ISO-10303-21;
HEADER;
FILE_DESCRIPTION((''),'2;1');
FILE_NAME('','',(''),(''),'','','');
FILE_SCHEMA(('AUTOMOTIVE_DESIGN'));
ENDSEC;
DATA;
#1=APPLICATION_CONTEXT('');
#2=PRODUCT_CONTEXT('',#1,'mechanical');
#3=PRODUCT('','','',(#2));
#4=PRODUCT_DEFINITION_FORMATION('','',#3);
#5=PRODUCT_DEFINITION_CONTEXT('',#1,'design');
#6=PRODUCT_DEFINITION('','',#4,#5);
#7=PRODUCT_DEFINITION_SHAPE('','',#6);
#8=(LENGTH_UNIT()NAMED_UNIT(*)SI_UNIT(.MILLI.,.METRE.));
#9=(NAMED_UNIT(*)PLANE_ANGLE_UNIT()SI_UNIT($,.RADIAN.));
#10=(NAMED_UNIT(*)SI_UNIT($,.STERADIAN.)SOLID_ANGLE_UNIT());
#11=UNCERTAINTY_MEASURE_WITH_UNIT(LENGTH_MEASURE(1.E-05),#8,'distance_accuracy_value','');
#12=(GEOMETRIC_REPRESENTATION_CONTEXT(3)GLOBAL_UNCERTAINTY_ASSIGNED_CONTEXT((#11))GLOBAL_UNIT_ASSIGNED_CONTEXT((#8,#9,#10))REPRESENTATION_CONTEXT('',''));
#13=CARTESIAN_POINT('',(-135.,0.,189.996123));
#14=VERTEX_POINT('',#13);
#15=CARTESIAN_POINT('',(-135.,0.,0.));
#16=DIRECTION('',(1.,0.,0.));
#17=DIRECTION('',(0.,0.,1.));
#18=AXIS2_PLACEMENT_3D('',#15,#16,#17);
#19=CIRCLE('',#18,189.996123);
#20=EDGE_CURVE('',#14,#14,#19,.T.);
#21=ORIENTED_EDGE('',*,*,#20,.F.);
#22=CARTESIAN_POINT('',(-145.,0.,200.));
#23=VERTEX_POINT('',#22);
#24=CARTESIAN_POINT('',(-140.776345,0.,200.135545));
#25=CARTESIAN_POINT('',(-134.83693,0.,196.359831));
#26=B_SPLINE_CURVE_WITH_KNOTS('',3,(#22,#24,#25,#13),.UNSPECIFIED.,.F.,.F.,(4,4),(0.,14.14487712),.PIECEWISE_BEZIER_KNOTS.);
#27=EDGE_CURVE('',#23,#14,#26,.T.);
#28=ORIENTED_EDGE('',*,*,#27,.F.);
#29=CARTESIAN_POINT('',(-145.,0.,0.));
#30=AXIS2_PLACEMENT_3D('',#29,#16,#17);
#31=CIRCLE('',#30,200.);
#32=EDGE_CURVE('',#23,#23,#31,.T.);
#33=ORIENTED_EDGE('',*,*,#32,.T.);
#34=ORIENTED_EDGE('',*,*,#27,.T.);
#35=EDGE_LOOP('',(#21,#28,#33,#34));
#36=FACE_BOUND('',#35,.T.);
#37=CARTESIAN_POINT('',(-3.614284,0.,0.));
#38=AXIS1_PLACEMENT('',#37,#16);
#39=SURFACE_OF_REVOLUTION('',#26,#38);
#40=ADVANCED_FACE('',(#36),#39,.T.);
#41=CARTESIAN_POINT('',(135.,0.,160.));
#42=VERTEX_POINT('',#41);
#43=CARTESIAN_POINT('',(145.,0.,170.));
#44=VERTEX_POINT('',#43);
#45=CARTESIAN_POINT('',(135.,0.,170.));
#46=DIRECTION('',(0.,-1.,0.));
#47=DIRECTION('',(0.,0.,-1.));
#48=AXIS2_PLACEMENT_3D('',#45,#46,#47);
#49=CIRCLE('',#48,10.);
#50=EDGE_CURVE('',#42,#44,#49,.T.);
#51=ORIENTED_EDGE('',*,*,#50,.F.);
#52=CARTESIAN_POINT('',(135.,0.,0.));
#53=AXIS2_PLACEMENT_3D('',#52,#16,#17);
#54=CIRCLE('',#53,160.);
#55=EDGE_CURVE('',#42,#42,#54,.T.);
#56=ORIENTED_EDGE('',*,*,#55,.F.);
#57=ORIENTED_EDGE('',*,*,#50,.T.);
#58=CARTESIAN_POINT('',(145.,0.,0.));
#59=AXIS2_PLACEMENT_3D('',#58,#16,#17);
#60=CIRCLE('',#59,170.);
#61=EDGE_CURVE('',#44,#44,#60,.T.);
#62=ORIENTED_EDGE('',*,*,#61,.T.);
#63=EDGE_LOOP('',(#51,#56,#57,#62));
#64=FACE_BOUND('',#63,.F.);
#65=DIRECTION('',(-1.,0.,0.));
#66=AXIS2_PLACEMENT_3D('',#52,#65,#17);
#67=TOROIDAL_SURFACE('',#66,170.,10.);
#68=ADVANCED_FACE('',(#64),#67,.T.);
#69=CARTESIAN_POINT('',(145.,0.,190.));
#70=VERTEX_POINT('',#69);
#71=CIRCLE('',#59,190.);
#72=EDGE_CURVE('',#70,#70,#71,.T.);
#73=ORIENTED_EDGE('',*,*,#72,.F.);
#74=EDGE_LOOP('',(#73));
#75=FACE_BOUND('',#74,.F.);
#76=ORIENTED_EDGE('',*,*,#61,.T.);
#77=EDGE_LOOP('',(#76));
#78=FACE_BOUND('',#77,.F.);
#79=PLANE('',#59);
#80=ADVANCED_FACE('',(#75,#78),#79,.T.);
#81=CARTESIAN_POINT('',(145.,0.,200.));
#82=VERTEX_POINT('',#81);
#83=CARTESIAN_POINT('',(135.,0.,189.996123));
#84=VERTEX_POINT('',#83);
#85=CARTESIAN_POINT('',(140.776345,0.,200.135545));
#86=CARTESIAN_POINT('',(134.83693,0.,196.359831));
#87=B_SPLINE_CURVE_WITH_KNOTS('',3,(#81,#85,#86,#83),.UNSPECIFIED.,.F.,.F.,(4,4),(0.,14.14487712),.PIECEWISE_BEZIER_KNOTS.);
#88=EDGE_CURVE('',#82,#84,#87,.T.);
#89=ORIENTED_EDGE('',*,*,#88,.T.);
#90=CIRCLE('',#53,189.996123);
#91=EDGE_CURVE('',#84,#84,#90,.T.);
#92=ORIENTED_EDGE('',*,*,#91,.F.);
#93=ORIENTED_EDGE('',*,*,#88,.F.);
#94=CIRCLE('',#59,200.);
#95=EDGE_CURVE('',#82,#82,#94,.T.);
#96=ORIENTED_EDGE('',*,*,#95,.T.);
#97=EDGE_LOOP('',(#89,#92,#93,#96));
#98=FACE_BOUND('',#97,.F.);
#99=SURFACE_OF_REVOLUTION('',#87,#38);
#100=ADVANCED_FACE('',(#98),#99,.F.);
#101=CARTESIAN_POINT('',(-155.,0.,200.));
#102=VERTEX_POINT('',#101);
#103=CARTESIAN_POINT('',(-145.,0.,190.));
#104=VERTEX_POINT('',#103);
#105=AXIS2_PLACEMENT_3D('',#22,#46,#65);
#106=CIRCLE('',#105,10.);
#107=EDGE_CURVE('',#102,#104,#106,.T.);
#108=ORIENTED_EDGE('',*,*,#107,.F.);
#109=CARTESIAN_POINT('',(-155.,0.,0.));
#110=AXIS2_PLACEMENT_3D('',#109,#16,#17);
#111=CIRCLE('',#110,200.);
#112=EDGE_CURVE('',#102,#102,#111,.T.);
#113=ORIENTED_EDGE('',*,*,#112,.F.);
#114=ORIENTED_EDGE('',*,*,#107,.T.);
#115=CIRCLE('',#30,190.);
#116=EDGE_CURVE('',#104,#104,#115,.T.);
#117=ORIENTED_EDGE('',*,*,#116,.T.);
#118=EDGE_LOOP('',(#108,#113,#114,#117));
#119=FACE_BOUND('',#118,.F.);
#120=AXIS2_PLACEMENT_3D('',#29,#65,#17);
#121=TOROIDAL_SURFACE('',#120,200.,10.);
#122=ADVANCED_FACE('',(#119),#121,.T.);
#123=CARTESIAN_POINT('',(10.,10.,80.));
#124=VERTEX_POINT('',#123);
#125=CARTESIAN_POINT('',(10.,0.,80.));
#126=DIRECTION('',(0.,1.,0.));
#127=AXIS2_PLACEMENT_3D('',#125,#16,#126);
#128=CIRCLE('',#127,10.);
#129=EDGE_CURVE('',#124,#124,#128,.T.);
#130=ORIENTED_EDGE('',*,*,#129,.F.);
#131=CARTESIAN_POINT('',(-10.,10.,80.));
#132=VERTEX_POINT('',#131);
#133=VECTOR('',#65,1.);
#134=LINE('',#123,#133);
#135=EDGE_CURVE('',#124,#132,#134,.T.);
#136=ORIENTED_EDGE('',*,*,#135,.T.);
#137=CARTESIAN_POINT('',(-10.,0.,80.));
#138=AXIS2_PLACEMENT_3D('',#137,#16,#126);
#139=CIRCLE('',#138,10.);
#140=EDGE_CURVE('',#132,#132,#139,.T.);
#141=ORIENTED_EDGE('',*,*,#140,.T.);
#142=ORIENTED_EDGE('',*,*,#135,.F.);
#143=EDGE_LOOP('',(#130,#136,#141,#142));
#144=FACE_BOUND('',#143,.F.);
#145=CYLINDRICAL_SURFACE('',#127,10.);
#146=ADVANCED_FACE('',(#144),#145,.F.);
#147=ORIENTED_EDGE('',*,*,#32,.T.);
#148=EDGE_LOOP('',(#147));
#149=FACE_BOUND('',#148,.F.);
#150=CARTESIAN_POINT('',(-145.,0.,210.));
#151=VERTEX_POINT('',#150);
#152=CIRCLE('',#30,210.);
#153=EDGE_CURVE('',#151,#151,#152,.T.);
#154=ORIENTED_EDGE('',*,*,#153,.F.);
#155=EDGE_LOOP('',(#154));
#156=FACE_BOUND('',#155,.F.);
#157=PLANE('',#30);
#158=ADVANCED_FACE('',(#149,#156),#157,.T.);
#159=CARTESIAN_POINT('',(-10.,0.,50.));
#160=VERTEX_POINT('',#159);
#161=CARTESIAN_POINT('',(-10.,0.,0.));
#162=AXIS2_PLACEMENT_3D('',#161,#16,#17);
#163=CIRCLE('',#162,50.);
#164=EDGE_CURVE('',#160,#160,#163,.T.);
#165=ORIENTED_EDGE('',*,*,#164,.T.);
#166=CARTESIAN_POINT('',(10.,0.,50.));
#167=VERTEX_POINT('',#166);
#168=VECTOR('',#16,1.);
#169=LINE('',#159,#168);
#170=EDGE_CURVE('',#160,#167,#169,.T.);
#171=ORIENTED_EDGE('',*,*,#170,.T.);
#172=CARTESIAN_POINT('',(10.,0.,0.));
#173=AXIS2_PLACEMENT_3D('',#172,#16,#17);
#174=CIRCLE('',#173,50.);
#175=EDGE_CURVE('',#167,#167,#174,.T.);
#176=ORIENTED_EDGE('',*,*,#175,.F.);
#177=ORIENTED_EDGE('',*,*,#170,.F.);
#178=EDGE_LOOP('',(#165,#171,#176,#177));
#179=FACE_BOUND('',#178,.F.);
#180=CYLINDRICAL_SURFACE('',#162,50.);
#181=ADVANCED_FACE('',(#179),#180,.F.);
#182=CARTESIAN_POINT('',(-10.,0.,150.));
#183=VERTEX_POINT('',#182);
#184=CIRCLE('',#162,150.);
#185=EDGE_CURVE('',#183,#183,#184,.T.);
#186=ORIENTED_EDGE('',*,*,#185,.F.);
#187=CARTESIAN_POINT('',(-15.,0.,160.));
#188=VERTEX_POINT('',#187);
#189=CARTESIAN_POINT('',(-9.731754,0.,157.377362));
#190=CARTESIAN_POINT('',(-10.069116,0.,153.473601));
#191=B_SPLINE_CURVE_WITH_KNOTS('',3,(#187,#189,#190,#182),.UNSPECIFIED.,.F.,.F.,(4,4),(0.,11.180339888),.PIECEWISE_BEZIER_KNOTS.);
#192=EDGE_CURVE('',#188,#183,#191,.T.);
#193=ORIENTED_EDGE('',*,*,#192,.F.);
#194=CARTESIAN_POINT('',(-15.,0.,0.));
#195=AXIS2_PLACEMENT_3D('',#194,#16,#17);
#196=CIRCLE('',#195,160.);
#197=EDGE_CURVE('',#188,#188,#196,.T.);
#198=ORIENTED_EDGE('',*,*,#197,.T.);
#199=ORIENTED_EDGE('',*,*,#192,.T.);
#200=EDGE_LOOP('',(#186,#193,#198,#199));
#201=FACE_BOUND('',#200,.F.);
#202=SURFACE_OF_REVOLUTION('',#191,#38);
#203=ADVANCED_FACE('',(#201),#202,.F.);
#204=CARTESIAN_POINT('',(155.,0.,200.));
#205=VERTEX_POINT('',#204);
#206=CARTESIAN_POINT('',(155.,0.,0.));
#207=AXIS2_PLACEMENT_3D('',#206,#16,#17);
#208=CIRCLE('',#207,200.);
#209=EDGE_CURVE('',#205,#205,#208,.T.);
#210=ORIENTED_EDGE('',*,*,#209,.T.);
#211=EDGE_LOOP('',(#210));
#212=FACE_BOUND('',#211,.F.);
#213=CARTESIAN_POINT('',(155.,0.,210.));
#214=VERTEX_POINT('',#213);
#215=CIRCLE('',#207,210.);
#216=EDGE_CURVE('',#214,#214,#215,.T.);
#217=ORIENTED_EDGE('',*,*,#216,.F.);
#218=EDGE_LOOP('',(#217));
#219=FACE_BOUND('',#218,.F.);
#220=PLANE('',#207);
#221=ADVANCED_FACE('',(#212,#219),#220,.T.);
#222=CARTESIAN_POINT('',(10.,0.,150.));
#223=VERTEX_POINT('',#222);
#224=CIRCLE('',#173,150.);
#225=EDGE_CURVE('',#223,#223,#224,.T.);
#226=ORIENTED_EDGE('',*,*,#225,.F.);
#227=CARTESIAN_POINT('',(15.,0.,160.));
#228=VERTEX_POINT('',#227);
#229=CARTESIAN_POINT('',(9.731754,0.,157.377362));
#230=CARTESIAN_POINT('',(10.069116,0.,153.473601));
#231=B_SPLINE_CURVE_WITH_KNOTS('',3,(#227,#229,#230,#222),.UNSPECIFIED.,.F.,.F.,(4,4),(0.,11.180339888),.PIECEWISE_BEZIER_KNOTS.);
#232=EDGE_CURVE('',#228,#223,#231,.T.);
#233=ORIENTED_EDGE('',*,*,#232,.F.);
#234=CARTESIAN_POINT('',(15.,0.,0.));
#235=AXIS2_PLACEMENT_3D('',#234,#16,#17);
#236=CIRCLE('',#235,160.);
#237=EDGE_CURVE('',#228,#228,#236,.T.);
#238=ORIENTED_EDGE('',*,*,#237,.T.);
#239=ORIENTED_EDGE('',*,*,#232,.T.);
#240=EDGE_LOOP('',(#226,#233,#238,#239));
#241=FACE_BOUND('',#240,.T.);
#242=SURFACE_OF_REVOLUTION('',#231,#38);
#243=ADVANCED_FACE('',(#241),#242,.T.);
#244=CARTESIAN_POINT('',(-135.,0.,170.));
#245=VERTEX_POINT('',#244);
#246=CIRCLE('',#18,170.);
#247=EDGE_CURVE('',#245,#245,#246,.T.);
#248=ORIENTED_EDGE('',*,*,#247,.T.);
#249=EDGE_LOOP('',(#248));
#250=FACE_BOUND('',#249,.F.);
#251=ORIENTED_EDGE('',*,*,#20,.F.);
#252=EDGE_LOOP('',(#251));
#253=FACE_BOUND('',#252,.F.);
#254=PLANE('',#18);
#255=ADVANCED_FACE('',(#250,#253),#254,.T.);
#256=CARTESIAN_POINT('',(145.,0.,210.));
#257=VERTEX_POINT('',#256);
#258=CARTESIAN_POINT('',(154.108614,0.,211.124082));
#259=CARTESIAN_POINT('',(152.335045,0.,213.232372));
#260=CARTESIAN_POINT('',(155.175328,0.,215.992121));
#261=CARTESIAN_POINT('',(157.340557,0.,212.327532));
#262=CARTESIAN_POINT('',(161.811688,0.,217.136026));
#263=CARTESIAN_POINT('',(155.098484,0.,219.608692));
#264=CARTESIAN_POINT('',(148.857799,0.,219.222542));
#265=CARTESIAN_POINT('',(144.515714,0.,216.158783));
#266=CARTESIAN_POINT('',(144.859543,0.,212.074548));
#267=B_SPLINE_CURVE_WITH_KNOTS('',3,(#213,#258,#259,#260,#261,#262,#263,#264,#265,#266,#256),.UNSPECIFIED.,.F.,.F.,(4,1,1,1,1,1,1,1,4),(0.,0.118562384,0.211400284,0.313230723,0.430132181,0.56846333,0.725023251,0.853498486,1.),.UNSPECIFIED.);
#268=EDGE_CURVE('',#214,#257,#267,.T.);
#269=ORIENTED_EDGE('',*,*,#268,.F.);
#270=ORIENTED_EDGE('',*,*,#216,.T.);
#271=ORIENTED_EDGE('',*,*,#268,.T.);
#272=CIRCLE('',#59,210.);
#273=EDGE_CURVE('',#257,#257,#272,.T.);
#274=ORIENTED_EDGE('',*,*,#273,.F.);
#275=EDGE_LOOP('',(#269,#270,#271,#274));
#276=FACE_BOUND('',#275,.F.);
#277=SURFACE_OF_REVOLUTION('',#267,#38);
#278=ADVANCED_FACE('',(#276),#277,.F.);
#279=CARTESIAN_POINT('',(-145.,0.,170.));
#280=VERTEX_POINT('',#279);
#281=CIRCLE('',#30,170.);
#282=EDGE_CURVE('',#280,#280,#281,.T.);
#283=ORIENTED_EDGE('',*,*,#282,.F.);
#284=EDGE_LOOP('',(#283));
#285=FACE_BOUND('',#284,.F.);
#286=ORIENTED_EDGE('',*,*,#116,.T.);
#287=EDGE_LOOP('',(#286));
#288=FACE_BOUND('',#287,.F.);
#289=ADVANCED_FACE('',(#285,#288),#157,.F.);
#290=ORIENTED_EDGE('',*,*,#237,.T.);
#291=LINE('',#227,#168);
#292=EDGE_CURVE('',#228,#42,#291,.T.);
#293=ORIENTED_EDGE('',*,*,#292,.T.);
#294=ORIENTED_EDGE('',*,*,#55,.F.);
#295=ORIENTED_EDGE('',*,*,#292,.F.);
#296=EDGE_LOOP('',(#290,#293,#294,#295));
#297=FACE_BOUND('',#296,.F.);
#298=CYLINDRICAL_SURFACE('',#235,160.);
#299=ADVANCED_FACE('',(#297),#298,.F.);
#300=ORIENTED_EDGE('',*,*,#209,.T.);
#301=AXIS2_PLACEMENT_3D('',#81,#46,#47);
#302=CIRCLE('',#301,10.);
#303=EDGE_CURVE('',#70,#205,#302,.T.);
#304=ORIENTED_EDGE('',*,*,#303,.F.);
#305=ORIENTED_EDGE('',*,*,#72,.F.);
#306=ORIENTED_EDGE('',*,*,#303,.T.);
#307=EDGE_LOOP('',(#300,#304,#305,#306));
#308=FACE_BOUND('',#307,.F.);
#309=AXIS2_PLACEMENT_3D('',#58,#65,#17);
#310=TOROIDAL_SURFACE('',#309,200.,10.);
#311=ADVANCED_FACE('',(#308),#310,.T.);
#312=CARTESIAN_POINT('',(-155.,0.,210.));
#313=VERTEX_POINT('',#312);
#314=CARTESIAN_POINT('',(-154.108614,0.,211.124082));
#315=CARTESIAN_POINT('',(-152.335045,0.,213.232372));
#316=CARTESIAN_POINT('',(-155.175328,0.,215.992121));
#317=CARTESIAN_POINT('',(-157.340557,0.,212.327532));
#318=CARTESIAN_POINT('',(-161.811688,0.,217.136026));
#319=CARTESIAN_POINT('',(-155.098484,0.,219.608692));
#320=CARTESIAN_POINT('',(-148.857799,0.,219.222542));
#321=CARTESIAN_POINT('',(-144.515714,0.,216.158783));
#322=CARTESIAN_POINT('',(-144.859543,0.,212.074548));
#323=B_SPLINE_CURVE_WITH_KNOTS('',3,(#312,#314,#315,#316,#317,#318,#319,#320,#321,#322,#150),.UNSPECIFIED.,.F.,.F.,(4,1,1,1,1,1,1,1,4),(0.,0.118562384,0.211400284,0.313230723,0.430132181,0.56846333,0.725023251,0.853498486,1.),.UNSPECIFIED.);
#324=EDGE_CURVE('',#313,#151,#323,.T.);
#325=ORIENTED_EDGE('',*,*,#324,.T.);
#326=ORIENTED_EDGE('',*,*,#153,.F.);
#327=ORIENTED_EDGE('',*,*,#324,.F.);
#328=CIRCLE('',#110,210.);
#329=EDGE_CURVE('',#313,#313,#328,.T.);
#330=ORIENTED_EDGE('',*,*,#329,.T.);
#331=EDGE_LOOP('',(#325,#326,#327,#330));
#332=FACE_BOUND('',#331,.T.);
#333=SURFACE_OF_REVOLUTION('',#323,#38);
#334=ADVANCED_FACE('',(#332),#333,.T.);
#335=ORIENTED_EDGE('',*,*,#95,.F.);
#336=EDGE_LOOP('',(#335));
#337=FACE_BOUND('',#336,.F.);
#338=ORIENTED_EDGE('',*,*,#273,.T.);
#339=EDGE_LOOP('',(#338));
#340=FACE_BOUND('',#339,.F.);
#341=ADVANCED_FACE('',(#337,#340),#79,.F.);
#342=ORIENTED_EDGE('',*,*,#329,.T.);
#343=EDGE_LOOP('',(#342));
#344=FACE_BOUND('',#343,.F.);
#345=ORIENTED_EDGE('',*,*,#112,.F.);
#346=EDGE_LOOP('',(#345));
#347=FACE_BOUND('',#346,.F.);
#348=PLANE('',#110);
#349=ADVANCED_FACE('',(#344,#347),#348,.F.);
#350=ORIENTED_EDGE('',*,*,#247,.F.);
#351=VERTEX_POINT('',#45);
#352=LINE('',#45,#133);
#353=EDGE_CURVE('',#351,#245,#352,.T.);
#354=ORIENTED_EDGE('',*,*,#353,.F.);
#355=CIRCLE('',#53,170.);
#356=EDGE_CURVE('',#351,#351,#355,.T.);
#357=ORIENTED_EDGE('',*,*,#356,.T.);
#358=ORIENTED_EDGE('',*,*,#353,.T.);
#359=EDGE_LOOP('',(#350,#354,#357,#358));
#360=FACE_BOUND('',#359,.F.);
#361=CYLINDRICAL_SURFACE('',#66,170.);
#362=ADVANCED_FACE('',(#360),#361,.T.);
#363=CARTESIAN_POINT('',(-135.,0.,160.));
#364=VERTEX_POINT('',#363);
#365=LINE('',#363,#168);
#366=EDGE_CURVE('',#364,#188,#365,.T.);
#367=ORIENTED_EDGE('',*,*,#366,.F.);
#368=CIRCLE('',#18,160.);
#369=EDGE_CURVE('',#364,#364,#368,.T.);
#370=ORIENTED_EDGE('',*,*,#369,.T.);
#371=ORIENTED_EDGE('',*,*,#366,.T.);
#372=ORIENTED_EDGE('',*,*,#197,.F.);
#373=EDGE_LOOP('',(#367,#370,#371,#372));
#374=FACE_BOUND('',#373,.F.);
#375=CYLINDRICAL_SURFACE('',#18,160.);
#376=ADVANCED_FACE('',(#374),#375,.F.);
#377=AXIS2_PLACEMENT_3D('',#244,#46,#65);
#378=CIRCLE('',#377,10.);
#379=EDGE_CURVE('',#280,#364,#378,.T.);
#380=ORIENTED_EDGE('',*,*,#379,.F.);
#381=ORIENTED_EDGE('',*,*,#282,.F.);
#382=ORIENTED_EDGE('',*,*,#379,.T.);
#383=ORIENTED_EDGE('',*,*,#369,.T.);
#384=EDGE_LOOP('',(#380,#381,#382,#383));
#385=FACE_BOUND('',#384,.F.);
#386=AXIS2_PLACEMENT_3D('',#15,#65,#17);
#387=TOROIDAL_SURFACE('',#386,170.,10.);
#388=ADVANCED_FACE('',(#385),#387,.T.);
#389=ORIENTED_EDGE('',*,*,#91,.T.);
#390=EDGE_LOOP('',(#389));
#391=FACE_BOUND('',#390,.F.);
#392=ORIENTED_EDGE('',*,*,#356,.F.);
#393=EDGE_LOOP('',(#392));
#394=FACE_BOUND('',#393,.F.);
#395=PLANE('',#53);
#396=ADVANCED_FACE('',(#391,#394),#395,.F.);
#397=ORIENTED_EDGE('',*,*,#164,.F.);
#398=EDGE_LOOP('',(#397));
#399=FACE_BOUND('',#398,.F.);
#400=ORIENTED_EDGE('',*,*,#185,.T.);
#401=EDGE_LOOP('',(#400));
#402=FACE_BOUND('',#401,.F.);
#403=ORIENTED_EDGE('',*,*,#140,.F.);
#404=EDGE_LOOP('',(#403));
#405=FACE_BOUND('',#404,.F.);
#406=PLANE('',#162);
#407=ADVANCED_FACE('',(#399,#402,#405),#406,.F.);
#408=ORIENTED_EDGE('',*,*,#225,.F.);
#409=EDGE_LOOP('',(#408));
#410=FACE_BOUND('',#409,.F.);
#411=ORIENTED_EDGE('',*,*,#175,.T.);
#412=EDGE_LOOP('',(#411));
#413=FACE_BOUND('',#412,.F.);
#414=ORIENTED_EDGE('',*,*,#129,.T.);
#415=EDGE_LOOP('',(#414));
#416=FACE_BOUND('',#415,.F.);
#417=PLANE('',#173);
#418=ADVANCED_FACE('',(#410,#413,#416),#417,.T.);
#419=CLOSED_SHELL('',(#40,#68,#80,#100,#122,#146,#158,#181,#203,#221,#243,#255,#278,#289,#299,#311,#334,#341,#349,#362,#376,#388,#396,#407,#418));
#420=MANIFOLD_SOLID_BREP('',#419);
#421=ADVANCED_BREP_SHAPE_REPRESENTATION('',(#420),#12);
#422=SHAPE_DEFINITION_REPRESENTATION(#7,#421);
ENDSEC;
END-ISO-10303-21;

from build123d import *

# Parameters (mm, degrees)
F2_R     = 10
F3_DEPTH = 20
F4_COUNT = 6
F4_ANGLE = 1800


with BuildPart() as f1:
    # F0 (on Front) → F1 (revolve)
    with BuildSketch(Plane.XZ):
        with BuildLine():
            Line((-135, 160), (-15, 160))
            add(Edge.make_bspline(
                [(-15, 160), (-9.7317537293, 157.3773622513), (-10.0691160187, 153.4736007452), (-10, 150)],
                knots=[0, 0, 0, 0, 11.1803398875, 11.1803398875, 11.1803398875, 11.1803398875], degree=3))
            Line((-10, 150), (-10, 50))
            Line((-10, 50), (10, 50))
            Line((10, 50), (10, 150))
            add(Edge.make_bspline(
                [(15, 160), (9.7317537293, 157.3773622513), (10.0691160187, 153.4736007452), (10, 150)],
                knots=[0, 0, 0, 0, 11.1803398875, 11.1803398875, 11.1803398875, 11.1803398875], degree=3))
            Line((15, 160), (135, 160))
            ThreePointArc((135, 160), (142.0710678119, 162.9289321881), (145, 170))
            Line((145, 170), (145, 190))
            ThreePointArc((145, 190), (152.0710678119, 192.9289321881), (155, 200))
            Line((155, 200), (155, 210))
            add(Edge.make_bspline(
                [(155, 210), (154.1086140007, 211.1240821505), (152.3350454635, 213.2323719114), (155.1753279482, 215.9921208461), (157.3405565473, 212.3275316174), (161.811688282, 217.1360260026), (155.0984836266, 219.6086922807), (148.8577992246, 219.2225416492), (144.5157139111, 216.1587826782), (144.8595434531, 212.0745483949), (145, 210)],
                knots=[0, 0, 0, 0, 0.1185623844, 0.2114002837, 0.3132307231, 0.4301321809, 0.5684633303, 0.7250232514, 0.8534984859, 1, 1, 1, 1], degree=3))
            Line((145, 210), (145, 200))
            add(Edge.make_bspline(
                [(145, 200), (140.7763447651, 200.1355448859), (134.836930118, 196.3598314841), (135, 189.9961233139)],
                knots=[0, 0, 0, 0, 14.1448771204, 14.1448771204, 14.1448771204, 14.1448771204], degree=3))
            Line((135, 189.9961233139), (135, 170))
            Line((135, 170), (-135, 170))
            Line((-135, 170), (-135, 189.9961233139))
            add(Edge.make_bspline(
                [(-145, 200), (-140.7763447651, 200.1355448859), (-134.836930118, 196.3598314841), (-135, 189.9961233139)],
                knots=[0, 0, 0, 0, 14.1448771204, 14.1448771204, 14.1448771204, 14.1448771204], degree=3))
            Line((-145, 200), (-145, 210))
            add(Edge.make_bspline(
                [(-155, 210), (-154.1086140007, 211.1240821505), (-152.3350454635, 213.2323719114), (-155.1753279482, 215.9921208461), (-157.3405565473, 212.3275316174), (-161.811688282, 217.1360260026), (-155.0984836266, 219.6086922807), (-148.8577992246, 219.2225416492), (-144.5157139111, 216.1587826782), (-144.8595434531, 212.0745483949), (-145, 210)],
                knots=[0, 0, 0, 0, 0.1185623844, 0.2114002837, 0.3132307231, 0.4301321809, 0.5684633303, 0.7250232514, 0.8534984859, 1, 1, 1, 1], degree=3))
            Line((-155, 210), (-155, 200))
            ThreePointArc((-155, 200), (-152.0710678119, 192.9289321881), (-145, 190))
            Line((-145, 190), (-145, 170))
            ThreePointArc((-145, 170), (-142.0710678119, 162.9289321881), (-135, 160))
        make_face()
    revolve(axis=Axis((-3.6142840981, 0, 0), (1, 0, 0)))

    # F2 (on face) → F3 (cut)
    with BuildSketch(Plane.YZ.offset(10)):
        with Locations((0, 80)):
            Circle(F2_R)
    extrude(amount=-F3_DEPTH, mode=Mode.SUBTRACT)

    # F4: F1 ×6 about axis
    f4_axis = Axis((-3.6142840981, 0, 0), (-1, 0, 0))


with BuildPart() as f1_1:
    add(f1.part)
    for i in range(1, F4_COUNT):
        add(f1.part.rotate(f4_axis, i * F4_ANGLE / (F4_COUNT - 1)))


solid = f1_1.part
